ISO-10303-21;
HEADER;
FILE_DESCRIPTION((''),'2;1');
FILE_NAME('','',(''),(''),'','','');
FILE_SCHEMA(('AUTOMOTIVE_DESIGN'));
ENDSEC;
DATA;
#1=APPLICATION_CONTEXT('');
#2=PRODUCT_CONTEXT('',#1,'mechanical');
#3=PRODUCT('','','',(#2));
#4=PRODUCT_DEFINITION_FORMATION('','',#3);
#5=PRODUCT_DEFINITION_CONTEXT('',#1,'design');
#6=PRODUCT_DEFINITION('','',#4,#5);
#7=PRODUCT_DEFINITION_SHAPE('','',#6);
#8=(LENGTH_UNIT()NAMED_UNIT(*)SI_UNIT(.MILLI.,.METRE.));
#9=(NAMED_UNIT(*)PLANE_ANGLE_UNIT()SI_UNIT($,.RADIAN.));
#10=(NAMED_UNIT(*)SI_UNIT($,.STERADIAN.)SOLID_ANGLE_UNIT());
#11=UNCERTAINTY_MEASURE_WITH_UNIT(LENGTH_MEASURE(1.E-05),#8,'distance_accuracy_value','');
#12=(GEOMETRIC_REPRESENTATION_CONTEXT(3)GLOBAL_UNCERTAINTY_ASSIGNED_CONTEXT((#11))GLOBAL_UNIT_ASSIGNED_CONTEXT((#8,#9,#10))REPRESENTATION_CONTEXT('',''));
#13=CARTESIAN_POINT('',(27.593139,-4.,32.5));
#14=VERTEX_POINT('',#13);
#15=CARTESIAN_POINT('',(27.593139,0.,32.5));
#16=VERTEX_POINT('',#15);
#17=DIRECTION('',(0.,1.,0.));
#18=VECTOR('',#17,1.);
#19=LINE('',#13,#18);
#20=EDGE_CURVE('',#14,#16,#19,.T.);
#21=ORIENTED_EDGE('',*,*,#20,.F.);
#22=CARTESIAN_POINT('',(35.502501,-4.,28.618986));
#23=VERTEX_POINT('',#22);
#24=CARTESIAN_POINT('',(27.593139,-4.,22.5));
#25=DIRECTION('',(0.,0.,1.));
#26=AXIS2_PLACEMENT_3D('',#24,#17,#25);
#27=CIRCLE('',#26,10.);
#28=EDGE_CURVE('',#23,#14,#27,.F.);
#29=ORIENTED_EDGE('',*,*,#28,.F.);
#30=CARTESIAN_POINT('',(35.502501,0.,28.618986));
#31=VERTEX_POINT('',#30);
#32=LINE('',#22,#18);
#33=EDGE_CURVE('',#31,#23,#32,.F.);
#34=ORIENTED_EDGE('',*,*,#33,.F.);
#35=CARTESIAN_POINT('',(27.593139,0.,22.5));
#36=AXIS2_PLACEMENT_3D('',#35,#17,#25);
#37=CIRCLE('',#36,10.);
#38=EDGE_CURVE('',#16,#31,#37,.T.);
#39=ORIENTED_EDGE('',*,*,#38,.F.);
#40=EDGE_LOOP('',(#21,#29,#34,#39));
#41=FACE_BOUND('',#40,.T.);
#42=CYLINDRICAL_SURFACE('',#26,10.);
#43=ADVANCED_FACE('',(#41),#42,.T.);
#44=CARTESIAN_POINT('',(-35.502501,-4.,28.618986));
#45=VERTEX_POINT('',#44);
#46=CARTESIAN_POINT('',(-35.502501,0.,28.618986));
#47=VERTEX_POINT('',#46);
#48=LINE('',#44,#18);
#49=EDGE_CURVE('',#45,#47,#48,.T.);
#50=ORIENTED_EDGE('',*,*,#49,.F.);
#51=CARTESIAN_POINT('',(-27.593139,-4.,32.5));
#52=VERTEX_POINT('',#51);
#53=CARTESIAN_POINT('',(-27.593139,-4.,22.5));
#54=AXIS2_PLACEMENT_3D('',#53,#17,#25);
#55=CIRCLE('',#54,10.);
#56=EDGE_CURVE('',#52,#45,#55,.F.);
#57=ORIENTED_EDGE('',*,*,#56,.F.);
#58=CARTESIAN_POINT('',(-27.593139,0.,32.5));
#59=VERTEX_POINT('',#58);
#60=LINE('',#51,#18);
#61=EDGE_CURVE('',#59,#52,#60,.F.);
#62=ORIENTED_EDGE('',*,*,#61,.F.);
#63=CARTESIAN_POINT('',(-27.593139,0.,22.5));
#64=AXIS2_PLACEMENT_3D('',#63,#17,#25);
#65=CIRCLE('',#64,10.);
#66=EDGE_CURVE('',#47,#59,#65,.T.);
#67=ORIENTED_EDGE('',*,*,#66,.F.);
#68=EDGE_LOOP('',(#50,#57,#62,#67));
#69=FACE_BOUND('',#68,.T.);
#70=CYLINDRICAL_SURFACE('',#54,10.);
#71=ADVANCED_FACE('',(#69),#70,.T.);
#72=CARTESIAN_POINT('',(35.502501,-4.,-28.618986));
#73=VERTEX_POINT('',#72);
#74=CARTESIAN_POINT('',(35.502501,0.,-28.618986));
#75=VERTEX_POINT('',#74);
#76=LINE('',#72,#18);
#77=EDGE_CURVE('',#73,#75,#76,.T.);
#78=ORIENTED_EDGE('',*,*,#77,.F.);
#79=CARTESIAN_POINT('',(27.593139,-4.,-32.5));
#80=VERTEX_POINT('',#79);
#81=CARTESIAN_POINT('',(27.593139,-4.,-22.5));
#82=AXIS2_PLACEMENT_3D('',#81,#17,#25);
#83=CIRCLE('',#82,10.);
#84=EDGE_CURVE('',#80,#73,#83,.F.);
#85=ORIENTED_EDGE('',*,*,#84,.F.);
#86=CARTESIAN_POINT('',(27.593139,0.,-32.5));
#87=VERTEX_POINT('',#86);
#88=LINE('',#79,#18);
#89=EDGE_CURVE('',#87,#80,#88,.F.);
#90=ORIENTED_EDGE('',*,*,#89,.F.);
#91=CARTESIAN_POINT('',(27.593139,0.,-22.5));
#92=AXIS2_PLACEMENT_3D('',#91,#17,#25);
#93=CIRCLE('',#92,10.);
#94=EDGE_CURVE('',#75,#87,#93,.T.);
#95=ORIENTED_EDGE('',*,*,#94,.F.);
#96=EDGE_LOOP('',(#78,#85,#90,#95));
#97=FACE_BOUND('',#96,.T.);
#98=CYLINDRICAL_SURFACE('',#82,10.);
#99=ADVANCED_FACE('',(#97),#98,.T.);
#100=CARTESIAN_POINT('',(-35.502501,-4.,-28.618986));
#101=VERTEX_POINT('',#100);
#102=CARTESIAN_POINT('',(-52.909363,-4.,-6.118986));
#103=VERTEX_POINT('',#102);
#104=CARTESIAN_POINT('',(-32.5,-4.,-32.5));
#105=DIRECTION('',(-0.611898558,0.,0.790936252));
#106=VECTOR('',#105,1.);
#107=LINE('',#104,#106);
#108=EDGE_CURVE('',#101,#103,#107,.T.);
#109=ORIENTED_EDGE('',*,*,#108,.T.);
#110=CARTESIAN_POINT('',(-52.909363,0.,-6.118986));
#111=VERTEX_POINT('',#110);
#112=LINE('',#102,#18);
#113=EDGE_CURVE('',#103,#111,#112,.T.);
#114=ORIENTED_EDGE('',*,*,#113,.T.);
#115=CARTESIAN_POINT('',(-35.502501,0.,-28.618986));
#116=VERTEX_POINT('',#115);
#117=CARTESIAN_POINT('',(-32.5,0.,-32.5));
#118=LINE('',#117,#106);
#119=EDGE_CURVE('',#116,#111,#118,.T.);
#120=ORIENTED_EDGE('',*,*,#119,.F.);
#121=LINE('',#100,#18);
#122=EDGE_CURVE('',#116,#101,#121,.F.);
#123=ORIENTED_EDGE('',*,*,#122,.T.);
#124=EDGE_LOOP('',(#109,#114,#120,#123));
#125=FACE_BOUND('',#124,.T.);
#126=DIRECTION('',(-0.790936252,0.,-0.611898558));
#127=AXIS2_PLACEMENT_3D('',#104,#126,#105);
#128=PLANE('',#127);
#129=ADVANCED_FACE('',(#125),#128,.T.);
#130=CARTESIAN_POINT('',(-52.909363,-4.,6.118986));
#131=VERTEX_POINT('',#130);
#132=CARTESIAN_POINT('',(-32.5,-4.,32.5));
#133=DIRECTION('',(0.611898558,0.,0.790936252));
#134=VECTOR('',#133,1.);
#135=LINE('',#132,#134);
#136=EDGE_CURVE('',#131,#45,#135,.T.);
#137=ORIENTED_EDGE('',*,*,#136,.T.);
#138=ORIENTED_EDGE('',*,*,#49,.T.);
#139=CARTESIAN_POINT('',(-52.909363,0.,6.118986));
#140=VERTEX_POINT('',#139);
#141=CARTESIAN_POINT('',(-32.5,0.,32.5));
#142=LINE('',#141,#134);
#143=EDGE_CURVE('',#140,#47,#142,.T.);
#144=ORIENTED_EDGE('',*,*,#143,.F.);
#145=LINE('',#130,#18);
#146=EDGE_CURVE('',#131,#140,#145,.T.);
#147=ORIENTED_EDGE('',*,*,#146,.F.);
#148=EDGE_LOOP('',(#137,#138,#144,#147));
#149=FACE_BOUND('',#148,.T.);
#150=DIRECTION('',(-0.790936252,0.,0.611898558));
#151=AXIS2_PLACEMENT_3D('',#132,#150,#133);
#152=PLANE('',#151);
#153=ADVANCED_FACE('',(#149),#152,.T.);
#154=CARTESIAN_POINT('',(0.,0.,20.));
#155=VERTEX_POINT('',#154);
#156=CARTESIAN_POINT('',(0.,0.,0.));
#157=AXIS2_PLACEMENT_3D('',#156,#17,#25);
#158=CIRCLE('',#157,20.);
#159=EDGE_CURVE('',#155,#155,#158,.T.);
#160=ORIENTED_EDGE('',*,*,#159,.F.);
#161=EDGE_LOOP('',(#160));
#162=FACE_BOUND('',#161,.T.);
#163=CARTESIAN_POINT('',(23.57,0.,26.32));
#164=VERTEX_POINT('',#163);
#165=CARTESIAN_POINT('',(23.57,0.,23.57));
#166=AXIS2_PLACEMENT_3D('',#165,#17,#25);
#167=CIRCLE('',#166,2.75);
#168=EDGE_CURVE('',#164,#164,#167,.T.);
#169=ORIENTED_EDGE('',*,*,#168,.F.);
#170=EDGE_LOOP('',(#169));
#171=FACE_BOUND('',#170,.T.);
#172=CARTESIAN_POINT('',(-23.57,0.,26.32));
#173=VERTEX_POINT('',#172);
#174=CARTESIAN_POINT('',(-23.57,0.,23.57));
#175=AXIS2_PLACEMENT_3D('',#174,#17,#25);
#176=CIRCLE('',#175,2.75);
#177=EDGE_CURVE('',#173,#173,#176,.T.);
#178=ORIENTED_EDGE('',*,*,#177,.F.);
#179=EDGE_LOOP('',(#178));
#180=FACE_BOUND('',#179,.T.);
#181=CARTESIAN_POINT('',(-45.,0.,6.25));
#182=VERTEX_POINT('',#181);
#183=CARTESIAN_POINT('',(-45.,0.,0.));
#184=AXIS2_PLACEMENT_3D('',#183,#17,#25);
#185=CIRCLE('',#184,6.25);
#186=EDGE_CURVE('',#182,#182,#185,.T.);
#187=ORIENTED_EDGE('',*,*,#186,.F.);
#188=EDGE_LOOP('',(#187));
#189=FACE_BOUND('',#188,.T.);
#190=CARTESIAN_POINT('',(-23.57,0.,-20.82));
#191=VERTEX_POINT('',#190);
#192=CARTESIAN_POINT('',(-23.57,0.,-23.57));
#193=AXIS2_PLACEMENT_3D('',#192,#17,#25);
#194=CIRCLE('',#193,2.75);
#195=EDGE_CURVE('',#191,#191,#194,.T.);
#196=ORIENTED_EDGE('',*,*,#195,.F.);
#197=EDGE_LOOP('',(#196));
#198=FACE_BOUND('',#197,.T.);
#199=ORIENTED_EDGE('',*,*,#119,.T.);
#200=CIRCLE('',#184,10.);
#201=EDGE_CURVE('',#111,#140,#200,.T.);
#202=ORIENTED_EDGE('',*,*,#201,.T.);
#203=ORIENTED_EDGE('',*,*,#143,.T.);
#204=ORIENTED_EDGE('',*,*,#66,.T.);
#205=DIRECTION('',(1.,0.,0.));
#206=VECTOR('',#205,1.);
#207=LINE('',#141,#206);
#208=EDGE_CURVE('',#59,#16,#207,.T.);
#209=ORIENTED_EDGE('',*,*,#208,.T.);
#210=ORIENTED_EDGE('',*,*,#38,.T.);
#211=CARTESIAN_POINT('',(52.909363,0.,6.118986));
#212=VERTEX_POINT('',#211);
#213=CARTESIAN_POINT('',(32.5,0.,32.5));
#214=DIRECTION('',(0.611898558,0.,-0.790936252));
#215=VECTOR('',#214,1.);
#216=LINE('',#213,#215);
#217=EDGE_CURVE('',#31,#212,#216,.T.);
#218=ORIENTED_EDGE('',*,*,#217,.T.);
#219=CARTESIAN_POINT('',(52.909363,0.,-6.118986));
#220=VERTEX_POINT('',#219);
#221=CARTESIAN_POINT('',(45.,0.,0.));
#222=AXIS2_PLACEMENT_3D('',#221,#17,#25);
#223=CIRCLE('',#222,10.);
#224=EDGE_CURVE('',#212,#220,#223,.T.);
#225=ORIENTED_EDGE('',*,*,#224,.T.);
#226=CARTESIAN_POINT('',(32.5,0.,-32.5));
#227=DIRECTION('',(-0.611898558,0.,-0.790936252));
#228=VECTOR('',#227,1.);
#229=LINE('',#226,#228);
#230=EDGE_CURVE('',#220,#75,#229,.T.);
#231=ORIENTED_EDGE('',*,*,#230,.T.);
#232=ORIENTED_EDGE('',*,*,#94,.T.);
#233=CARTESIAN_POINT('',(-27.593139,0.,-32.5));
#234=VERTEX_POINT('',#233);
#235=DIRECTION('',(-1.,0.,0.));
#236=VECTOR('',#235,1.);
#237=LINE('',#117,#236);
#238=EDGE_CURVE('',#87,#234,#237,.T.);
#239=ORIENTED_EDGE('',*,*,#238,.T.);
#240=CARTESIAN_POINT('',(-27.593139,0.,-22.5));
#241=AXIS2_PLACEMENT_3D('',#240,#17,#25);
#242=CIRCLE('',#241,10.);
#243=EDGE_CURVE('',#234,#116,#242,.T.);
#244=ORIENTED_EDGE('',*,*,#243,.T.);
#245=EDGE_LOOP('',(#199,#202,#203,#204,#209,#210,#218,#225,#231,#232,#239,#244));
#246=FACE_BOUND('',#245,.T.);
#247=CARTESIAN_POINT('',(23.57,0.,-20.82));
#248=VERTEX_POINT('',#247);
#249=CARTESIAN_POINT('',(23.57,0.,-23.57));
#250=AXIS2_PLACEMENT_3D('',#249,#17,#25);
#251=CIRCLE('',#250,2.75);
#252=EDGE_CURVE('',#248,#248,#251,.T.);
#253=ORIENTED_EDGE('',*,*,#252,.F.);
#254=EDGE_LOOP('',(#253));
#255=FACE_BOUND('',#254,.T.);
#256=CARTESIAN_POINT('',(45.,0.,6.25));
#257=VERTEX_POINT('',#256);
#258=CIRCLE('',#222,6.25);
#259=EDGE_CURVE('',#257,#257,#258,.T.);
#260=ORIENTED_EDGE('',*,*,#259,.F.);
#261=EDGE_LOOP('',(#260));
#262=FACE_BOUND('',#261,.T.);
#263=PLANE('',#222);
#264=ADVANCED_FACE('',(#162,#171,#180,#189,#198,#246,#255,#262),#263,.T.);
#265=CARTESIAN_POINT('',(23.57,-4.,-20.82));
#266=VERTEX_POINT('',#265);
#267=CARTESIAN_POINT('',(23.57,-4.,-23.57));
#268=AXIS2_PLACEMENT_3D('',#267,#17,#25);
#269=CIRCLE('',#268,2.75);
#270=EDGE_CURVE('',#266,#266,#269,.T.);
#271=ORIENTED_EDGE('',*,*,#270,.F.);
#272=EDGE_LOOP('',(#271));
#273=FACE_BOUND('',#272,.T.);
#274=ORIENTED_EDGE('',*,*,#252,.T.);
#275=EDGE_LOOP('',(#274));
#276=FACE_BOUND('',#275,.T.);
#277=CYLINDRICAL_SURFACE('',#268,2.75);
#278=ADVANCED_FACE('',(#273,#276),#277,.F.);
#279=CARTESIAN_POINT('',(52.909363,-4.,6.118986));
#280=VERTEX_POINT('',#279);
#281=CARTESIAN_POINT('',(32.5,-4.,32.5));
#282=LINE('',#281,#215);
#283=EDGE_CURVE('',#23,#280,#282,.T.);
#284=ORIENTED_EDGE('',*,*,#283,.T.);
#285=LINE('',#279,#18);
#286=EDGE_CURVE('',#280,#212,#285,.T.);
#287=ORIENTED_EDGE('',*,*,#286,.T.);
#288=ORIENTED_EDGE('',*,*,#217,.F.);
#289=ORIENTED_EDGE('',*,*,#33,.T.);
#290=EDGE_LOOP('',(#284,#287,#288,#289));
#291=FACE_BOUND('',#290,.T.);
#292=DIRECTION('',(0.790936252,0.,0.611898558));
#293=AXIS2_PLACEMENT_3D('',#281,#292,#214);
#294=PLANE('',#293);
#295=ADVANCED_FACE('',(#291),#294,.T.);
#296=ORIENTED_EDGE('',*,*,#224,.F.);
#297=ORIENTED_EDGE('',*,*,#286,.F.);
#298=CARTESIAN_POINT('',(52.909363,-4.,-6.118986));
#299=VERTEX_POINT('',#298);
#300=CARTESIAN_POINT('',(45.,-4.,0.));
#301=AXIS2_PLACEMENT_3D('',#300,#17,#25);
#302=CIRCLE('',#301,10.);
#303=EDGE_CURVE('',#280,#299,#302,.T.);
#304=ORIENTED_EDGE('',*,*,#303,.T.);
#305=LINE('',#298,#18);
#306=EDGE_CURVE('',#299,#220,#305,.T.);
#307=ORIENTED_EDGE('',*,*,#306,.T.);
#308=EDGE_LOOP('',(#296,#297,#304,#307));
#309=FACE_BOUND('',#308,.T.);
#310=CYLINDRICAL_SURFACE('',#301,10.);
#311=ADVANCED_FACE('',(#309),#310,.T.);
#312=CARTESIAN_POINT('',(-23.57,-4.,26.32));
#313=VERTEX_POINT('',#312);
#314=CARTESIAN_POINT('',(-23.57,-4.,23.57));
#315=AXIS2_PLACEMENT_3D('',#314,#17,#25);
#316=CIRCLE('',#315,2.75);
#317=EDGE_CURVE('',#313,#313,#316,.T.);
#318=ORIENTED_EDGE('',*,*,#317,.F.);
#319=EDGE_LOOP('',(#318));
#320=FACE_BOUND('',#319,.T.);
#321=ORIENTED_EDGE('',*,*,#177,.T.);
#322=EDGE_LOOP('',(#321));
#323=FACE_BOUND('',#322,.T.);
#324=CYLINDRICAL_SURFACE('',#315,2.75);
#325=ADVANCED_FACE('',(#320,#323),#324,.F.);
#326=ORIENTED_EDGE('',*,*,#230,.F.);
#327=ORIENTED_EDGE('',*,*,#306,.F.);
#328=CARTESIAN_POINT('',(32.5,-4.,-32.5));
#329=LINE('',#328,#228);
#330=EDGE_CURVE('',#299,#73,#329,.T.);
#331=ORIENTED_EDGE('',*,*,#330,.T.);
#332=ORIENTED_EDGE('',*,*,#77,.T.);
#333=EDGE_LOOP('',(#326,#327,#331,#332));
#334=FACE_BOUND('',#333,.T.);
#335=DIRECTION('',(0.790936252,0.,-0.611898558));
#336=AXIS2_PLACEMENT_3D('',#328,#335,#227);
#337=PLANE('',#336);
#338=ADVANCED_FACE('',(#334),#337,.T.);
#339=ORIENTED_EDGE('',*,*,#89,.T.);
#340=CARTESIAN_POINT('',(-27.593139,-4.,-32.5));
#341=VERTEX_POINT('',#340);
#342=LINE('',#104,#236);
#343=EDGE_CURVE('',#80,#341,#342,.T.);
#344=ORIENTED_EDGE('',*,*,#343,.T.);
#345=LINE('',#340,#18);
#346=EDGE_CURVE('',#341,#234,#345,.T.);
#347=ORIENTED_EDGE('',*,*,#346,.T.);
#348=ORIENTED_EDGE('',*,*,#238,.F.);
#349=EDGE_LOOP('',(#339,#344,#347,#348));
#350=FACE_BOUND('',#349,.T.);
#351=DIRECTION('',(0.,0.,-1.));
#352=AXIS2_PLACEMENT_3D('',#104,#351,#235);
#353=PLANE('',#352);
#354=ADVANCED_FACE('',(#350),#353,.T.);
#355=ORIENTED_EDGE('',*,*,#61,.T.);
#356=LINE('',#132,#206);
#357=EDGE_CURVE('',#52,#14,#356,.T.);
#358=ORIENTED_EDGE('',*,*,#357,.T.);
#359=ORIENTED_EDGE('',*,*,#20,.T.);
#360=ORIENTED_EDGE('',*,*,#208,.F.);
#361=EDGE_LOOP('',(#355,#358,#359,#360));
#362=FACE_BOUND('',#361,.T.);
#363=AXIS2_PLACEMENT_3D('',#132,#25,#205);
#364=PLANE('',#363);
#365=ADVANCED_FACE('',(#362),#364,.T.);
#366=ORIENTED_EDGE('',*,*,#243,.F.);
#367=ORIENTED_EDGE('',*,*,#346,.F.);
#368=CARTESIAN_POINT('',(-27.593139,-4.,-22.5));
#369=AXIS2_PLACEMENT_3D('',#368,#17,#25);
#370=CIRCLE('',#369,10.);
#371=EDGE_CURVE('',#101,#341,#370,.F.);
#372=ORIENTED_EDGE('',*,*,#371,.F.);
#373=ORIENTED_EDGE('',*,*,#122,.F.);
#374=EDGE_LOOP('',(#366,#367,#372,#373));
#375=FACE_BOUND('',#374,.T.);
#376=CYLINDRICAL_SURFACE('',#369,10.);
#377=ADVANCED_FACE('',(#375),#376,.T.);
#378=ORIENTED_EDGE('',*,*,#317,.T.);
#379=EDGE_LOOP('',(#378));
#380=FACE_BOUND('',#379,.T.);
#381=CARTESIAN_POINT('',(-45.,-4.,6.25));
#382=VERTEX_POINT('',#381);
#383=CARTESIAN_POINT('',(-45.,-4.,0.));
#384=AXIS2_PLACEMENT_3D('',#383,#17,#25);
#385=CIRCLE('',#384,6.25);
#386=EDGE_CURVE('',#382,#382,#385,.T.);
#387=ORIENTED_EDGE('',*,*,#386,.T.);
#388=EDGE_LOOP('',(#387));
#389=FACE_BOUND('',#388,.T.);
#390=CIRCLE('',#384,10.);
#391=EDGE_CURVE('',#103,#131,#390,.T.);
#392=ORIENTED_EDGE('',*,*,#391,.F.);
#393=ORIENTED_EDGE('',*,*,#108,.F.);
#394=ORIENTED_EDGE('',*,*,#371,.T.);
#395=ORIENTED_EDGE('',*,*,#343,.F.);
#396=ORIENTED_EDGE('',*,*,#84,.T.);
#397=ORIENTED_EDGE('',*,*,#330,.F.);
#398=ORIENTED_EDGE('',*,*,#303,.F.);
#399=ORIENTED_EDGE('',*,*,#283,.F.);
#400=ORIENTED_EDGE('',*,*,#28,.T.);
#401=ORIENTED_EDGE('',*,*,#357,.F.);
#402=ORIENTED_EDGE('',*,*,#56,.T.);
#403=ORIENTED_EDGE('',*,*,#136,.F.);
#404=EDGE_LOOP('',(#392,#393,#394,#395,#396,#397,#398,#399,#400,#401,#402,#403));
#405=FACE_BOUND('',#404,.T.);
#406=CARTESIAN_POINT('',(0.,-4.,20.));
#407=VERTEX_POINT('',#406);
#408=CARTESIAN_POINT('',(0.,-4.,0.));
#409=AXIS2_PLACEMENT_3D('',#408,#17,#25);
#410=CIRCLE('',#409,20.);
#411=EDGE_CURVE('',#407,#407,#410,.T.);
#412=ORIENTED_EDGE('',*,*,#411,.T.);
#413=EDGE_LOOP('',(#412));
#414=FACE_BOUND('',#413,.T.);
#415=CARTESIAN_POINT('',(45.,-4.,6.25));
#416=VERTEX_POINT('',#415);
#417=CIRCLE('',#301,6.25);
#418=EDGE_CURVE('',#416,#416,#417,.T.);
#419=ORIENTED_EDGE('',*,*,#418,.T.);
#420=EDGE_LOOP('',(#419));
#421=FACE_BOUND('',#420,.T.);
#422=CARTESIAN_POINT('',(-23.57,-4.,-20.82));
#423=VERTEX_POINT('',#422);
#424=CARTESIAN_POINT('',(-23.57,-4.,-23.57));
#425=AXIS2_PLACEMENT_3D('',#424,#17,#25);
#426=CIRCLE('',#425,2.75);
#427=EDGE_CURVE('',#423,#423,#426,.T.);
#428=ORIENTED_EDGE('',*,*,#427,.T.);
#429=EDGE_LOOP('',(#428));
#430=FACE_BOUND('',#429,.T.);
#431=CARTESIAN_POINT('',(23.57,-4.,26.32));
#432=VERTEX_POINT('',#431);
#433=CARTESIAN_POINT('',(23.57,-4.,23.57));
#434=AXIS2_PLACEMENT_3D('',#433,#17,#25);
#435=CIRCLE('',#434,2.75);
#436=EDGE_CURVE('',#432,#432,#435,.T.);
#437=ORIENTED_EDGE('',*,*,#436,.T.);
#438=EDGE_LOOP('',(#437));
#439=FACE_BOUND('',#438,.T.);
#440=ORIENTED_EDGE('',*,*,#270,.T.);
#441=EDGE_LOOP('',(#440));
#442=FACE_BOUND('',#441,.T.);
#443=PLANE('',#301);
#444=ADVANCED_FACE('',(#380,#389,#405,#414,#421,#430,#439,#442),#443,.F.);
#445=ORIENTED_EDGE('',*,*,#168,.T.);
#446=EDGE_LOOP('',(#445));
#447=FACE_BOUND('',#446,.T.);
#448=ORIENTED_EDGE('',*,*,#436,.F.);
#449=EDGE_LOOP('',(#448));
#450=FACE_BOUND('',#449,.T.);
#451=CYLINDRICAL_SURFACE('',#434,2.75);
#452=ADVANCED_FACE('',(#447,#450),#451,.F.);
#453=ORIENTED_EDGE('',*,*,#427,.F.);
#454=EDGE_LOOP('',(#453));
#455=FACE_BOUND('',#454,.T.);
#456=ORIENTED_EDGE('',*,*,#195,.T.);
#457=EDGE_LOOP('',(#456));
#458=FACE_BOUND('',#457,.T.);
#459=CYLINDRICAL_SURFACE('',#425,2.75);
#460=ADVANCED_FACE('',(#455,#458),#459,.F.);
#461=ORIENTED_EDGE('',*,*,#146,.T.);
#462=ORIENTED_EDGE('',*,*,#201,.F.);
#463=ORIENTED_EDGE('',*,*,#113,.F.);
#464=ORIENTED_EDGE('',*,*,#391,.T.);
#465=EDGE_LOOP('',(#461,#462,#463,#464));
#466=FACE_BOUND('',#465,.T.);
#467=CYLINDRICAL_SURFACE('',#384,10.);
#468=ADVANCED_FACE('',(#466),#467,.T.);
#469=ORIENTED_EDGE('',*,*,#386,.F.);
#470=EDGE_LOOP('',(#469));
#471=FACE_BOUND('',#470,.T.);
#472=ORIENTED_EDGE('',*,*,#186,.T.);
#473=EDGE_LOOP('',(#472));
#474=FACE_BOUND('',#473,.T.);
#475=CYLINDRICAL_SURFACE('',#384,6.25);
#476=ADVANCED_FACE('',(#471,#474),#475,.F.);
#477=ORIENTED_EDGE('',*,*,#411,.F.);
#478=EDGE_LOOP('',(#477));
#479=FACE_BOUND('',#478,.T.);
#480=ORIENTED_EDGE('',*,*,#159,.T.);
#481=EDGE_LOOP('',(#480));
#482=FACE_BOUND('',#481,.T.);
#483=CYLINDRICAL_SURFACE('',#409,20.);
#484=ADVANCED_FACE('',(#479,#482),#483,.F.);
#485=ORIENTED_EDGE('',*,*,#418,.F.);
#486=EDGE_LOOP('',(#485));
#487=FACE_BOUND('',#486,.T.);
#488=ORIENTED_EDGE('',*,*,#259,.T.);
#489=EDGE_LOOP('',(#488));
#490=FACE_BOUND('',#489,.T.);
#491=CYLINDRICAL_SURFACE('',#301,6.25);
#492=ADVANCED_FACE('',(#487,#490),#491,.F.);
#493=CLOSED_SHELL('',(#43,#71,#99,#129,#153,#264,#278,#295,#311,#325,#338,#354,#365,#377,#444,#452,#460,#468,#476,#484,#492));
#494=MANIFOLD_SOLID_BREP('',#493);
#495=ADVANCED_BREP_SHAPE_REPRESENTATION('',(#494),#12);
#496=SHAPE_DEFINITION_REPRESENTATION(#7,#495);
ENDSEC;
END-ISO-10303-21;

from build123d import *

# Parameters (mm, degrees)
SKETCH1_R          = 20
SKETCH1_R_2        = 2.75
SKETCH1_R_3        = 6.25
BASE_FLANGE1_DEPTH = 4
FILLET1_R          = 10


# Sheet-metal steps are written as plain solids
with BuildPart() as part:
    # Sketch1 → Base-Flange1 (new body)
    with BuildSketch(Plane(origin=(0, 0, 0), x_dir=(1, 0, 0), z_dir=(0, 1, 0))):
        with BuildLine():
            Line((32.5, 32.5), (52.909362517, 6.118985584))
            ThreePointArc((52.909362517, 6.118985584), (55, 0), (52.909362517, -6.118985584))
            Line((52.909362517, -6.118985584), (32.5, -32.5))
            Line((32.5, -32.5), (-32.5, -32.5))
            Line((-32.5, -32.5), (-52.909362517, -6.118985584))
            ThreePointArc((-52.909362517, -6.118985584), (-55, 0), (-52.909362517, 6.118985584))
            Line((-52.909362517, 6.118985584), (-32.5, 32.5))
            Line((-32.5, 32.5), (32.5, 32.5))
        make_face()
        with Locations(Location((0, 0, 0), (0, 0, 270))):
            Circle(SKETCH1_R, mode=Mode.SUBTRACT)
        with Locations(Location((-23.57, 23.57, 0), (0, 0, 270))):
            Circle(SKETCH1_R_2, mode=Mode.SUBTRACT)
        with Locations(Location((23.57, 23.57, 0), (0, 0, 270))):
            Circle(SKETCH1_R_2, mode=Mode.SUBTRACT)
        with Locations(Location((23.57, -23.57, 0), (0, 0, 270))):
            Circle(SKETCH1_R_2, mode=Mode.SUBTRACT)
        with Locations(Location((-23.57, -23.57, 0), (0, 0, 270))):
            Circle(SKETCH1_R_2, mode=Mode.SUBTRACT)
        with Locations(Location((-45, 0, 0), (0, 0, 270))):
            Circle(SKETCH1_R_3, mode=Mode.SUBTRACT)
        with Locations(Location((45, 0, 0), (0, 0, 270))):
            Circle(SKETCH1_R_3, mode=Mode.SUBTRACT)
    extrude(amount=-BASE_FLANGE1_DEPTH)

    # Fillet1
    fillet1_edges = [part.edges().sort_by_distance(p)[0] for p in [
        (32.5, -2, -32.5),
        (32.5, -2, 32.5),
        (-32.5, -2, 32.5),
        (-32.5, -2, -32.5),
    ]]
    fillet(fillet1_edges, radius=FILLET1_R)


solid = part.part
